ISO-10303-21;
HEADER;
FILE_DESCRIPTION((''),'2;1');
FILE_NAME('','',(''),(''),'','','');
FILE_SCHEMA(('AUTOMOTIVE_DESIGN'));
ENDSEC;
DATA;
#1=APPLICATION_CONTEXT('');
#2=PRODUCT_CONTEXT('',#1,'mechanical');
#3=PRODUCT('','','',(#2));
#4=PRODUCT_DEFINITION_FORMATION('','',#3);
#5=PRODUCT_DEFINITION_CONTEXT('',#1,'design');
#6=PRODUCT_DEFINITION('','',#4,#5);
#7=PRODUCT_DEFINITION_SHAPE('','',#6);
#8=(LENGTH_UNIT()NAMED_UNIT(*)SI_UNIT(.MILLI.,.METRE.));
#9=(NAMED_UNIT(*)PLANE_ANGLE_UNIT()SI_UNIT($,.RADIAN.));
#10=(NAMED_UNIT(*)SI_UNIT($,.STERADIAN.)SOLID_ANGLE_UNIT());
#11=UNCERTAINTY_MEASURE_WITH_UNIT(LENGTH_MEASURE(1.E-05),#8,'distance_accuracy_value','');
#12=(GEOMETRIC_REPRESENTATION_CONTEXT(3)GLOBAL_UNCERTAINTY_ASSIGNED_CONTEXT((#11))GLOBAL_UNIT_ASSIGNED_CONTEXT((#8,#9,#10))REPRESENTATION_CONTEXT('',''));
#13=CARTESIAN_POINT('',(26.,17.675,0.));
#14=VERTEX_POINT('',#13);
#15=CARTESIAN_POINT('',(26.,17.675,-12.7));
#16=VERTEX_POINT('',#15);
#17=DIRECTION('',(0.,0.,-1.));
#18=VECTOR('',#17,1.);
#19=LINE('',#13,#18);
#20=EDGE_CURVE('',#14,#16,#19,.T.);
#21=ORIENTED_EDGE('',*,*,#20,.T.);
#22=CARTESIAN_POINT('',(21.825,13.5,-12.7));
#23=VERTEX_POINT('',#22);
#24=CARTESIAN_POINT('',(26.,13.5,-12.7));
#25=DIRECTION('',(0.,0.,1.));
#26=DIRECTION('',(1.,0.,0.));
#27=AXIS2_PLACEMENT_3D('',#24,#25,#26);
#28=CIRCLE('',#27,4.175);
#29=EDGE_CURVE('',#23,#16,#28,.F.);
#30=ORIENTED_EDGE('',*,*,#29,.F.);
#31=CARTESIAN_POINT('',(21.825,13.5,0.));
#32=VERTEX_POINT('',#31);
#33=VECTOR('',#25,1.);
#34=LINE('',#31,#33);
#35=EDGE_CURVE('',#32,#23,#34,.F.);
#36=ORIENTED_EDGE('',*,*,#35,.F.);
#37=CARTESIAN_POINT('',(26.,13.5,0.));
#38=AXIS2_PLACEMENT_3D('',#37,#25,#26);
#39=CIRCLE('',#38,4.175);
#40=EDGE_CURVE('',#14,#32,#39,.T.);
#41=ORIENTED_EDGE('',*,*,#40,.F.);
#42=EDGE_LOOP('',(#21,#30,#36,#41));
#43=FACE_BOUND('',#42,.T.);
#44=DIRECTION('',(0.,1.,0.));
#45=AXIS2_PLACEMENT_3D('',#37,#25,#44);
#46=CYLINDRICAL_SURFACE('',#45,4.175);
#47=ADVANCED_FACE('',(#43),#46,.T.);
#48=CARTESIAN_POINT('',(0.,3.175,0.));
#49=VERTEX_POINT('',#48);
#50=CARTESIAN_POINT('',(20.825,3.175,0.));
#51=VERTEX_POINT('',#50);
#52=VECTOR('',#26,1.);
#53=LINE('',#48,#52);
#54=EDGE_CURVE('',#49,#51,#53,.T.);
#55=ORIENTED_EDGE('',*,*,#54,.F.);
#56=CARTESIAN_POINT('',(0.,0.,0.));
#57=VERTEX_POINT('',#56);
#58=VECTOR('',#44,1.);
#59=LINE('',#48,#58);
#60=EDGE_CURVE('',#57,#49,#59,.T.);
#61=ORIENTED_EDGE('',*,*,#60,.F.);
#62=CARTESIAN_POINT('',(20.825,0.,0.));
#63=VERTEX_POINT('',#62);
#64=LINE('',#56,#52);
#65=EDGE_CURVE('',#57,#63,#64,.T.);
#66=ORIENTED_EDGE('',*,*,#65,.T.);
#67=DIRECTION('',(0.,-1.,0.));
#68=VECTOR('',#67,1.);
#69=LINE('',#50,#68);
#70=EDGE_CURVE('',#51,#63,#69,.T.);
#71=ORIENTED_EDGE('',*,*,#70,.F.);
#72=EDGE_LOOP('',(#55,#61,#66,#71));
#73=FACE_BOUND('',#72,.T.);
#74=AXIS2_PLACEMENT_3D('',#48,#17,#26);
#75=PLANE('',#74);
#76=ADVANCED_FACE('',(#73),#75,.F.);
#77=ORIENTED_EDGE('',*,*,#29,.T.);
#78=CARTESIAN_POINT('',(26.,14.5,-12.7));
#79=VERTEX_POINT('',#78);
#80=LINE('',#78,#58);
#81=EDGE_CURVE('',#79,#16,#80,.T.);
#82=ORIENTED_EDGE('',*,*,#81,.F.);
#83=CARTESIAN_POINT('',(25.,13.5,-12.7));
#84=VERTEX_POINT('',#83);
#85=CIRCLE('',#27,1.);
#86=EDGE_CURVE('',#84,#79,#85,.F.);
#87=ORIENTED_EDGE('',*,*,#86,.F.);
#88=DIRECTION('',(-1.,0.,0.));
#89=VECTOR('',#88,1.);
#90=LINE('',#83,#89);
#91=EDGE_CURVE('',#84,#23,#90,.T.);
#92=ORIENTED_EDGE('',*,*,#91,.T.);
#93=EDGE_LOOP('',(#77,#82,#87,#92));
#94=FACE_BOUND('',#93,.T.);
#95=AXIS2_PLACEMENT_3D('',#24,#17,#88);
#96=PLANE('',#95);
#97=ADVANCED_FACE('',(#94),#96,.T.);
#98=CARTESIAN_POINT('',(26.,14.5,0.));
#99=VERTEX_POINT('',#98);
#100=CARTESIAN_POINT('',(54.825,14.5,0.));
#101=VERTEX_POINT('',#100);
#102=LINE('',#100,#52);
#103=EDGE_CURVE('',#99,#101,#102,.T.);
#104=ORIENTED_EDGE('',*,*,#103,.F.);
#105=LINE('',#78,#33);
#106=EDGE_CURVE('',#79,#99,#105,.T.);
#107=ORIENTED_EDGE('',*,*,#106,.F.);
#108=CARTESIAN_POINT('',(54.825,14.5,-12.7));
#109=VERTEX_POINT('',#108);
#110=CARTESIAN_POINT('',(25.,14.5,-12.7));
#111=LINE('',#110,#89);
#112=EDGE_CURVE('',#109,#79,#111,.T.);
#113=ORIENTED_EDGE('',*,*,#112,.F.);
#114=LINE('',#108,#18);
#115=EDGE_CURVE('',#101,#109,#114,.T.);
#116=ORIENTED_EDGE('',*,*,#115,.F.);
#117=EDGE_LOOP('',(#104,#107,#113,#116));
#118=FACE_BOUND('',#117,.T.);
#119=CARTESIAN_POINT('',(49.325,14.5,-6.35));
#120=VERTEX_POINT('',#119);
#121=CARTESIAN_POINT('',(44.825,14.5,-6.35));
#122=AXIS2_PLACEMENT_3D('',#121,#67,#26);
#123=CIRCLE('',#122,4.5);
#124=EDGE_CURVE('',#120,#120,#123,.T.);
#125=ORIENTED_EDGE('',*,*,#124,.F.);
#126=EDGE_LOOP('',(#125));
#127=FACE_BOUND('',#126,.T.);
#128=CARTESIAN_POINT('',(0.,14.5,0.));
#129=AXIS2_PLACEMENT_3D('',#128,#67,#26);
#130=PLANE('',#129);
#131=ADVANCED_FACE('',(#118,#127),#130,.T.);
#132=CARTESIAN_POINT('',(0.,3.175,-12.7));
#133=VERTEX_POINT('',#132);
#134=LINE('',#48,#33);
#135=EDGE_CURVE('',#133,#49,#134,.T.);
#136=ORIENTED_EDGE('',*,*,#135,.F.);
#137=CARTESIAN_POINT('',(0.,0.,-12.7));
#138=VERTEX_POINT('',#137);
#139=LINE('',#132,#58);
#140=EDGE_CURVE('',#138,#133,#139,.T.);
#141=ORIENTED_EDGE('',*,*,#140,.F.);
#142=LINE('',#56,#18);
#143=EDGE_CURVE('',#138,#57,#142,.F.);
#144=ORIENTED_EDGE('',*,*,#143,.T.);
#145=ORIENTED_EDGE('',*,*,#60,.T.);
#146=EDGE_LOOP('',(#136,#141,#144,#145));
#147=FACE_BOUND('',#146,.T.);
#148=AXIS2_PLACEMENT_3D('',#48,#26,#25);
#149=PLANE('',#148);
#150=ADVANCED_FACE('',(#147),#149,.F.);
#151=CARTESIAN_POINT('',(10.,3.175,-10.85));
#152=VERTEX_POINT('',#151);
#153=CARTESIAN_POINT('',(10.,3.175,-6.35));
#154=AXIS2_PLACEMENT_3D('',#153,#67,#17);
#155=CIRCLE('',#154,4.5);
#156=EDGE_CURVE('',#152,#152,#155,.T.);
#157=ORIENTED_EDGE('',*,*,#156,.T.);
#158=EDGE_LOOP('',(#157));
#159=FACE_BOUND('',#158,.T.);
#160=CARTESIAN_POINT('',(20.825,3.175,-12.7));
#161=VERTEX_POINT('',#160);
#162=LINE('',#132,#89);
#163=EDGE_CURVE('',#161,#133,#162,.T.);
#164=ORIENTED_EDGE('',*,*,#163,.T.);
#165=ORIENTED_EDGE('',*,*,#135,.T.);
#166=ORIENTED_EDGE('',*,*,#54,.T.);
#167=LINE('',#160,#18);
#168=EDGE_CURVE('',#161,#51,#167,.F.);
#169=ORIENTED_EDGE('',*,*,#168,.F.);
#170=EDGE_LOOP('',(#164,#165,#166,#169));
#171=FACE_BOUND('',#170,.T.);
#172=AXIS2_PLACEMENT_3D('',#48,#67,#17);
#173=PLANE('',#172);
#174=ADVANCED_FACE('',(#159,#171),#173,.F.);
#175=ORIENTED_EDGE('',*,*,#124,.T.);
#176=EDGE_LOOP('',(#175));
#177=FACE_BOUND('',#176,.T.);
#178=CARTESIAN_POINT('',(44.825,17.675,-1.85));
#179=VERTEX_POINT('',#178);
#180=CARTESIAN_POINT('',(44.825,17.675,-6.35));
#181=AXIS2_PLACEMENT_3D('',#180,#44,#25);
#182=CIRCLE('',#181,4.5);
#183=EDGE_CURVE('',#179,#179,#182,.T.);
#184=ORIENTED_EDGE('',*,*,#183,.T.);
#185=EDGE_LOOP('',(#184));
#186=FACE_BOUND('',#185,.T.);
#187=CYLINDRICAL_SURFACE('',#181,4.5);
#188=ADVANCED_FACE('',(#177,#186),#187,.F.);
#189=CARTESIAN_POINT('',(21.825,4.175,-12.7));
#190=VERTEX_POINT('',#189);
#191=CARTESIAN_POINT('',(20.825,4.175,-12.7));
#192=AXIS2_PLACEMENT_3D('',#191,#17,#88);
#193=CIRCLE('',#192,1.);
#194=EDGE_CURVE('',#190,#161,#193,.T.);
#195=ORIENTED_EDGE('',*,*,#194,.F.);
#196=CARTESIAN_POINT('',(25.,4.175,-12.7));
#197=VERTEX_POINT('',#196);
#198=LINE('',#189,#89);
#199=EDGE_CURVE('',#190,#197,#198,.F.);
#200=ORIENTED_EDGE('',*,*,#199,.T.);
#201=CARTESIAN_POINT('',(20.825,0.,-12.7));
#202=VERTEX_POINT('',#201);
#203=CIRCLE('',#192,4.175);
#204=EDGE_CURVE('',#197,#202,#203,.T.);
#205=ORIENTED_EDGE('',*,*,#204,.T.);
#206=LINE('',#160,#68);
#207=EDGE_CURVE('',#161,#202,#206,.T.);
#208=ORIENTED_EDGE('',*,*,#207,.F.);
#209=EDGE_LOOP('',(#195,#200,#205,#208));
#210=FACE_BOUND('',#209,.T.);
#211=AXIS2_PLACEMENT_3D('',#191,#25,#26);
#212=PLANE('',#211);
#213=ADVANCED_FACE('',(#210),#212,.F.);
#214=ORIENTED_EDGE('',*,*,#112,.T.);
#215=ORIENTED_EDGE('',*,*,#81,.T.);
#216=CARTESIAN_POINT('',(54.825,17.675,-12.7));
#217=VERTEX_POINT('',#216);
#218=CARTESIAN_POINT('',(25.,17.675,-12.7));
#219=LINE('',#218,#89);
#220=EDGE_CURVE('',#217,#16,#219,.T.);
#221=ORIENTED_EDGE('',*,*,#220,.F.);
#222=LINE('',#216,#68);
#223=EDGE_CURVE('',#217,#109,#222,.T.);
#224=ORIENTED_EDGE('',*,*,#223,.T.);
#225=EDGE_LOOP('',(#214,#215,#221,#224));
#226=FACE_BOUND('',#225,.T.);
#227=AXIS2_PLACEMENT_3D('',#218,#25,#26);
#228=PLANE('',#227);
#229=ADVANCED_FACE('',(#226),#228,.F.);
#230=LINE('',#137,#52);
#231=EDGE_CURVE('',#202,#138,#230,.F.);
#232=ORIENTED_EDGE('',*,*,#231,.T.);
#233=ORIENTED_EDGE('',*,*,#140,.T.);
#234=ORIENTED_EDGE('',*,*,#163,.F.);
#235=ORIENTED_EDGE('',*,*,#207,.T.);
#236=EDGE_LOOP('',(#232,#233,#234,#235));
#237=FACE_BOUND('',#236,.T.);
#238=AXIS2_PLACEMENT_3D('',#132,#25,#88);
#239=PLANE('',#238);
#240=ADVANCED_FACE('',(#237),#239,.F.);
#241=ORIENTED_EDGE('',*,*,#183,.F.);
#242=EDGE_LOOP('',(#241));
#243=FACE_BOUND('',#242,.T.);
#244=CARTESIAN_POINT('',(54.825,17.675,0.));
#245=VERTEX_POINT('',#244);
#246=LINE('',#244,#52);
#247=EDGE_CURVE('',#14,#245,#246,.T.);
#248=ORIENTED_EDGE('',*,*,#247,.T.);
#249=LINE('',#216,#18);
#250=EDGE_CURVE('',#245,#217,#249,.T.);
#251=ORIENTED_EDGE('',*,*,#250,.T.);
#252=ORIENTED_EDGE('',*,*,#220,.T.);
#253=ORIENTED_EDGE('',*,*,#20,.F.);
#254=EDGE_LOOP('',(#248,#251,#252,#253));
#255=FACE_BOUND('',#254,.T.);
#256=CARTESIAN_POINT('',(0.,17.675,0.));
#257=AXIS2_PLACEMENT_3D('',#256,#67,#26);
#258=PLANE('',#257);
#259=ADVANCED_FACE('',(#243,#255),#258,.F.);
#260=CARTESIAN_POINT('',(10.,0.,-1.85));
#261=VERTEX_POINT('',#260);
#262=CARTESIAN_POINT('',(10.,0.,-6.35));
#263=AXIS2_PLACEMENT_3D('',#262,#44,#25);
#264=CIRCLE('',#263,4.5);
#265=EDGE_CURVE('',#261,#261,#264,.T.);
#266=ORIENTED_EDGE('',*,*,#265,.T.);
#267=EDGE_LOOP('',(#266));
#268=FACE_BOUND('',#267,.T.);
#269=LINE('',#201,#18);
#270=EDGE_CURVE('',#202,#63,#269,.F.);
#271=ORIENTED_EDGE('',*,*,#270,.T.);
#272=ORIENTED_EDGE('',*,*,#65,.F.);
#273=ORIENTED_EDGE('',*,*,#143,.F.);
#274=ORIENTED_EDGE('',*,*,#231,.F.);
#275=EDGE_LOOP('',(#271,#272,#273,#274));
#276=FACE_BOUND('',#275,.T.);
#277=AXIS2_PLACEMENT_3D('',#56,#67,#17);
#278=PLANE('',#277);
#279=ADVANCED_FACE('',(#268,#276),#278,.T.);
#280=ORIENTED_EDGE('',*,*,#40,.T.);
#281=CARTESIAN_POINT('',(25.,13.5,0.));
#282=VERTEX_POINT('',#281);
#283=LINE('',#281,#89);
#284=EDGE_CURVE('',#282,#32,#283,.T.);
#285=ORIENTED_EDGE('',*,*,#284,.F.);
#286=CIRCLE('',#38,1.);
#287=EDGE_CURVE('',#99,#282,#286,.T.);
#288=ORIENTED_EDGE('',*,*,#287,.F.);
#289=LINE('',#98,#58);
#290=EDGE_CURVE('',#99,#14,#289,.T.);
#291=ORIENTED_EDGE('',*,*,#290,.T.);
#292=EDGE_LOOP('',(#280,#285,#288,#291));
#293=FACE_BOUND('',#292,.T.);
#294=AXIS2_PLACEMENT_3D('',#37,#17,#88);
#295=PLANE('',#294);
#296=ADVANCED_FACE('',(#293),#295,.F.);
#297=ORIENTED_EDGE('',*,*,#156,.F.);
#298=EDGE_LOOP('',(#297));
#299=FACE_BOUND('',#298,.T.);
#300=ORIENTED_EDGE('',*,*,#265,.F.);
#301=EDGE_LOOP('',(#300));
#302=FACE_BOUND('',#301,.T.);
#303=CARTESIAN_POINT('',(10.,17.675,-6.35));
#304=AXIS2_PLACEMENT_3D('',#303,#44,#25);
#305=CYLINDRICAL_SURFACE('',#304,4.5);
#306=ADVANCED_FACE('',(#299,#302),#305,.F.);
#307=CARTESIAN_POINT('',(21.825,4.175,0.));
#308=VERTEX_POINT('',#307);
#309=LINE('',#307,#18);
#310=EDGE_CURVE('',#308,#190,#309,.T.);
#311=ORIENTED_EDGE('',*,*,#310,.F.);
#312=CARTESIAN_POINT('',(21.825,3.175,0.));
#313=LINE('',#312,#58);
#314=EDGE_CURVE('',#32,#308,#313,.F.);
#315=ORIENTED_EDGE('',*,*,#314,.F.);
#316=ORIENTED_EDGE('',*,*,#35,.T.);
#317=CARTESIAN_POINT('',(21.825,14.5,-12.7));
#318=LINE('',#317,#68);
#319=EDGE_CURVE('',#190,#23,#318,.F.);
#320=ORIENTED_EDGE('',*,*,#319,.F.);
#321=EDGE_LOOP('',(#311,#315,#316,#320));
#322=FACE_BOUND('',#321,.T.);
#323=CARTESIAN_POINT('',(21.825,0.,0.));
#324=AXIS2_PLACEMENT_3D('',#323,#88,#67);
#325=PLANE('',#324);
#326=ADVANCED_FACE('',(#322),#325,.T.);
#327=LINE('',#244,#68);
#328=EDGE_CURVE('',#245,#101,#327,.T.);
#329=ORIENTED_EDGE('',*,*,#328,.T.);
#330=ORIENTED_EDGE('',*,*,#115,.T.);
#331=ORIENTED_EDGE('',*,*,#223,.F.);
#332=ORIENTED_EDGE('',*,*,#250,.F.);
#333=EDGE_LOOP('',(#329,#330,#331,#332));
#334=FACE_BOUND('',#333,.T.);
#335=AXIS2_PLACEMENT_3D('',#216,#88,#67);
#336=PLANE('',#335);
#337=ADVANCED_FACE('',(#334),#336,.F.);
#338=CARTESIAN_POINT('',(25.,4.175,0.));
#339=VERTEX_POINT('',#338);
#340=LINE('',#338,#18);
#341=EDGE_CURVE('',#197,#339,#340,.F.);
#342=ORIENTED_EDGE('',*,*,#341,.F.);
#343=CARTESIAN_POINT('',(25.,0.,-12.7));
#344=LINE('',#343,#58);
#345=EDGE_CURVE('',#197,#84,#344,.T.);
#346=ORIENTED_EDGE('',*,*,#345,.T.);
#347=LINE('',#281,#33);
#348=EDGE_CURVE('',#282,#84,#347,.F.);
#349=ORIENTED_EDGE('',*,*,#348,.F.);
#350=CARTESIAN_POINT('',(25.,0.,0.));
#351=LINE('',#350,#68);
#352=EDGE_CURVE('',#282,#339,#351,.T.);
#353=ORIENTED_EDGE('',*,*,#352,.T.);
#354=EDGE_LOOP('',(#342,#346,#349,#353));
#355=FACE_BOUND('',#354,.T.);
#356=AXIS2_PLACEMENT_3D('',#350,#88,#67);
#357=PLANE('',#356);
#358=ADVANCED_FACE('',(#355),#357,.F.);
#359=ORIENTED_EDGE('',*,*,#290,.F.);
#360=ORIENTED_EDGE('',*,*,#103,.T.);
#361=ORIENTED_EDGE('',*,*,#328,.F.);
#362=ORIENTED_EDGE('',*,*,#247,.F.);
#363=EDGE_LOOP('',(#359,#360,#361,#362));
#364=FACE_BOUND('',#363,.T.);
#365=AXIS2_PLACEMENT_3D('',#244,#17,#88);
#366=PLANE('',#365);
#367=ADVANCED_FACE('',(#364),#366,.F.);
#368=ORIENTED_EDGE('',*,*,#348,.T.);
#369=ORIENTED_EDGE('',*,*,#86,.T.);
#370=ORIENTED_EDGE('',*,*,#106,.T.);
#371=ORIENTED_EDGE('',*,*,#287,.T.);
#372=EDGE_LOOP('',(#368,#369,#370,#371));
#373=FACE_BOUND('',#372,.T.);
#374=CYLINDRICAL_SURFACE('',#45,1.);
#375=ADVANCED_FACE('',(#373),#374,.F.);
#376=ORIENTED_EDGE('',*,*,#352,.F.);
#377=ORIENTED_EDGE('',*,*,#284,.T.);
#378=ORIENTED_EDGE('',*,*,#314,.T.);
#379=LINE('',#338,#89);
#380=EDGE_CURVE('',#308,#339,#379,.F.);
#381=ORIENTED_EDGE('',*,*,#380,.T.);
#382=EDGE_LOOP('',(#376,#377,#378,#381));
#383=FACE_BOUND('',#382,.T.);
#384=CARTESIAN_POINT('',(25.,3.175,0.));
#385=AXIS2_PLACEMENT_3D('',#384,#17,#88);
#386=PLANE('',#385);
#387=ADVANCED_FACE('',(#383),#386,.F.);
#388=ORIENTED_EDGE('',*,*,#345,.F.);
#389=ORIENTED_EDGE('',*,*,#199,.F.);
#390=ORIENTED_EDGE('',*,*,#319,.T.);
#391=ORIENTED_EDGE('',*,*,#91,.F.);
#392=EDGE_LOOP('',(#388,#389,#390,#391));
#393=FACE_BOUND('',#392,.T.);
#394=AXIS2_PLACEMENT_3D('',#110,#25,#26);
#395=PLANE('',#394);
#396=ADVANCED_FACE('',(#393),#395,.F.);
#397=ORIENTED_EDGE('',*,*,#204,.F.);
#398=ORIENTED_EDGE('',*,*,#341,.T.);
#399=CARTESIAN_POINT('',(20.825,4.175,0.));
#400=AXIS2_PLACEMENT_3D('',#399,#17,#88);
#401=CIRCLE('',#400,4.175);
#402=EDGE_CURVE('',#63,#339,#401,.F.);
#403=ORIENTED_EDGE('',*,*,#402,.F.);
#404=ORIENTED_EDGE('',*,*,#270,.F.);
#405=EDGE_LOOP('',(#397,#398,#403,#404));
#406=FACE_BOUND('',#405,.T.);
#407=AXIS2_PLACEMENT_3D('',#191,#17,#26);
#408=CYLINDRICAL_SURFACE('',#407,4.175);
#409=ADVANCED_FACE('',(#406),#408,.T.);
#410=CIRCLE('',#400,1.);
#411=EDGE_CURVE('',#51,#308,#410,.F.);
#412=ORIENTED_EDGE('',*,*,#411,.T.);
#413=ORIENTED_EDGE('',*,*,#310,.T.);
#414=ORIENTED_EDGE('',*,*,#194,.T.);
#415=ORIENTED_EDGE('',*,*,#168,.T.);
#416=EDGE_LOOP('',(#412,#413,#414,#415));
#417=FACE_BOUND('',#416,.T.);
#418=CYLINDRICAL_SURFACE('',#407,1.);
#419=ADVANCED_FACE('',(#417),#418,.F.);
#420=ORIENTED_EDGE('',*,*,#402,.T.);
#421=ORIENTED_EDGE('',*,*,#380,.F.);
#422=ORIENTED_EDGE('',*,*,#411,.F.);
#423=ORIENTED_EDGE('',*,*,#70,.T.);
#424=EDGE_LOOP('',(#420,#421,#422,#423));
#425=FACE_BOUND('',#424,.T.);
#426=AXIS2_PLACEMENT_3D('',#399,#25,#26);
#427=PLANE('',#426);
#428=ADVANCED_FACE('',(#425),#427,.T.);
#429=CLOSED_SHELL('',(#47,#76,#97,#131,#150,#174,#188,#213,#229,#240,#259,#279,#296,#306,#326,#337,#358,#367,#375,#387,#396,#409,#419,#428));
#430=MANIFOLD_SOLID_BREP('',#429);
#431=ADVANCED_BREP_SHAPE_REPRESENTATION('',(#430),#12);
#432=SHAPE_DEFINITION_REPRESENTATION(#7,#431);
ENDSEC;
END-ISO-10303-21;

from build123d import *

# Parameters (mm, degrees)
SKETCH1_W                    = 25
SKETCH1_H                    = 12.7
BOSS_EXTRUDE1_DEPTH          = 3.175
EDGE_FLANGE1_STRIP_W         = 14.7
EDGE_FLANGE1_STRIP_H         = 3.175
EDGE_FLANGE1_STRIP_CUT_DEPTH = 12.7
EDGE_FLANGE1_DEPTH           = 12.7
EDGE_FLANGE2_STRIP_W         = 14.7
EDGE_FLANGE2_STRIP_H         = 3.175
EDGE_FLANGE2_STRIP_CUT_DEPTH = 12.7
EDGE_FLANGE2_DEPTH           = 12.7
M8_CLEARANCE_HOLE1_D         = 9


# Sheet-metal steps are written as plain solids
with BuildPart() as part:
    # Sketch1 → Boss-Extrude1 (new body)
    with BuildSketch(Plane(origin=(0, 0, 0), x_dir=(1, 0, 0), z_dir=(0, 1, 0))):
        with Locations((12.5, 6.35)):
            Rectangle(SKETCH1_W, SKETCH1_H)
    extrude(amount=BOSS_EXTRUDE1_DEPTH)

    # Edge-Flange1 strip (across the edge) → Edge-Flange1 strip cut (cut)
    with BuildSketch(Plane(origin=(25, 3.175, 0), x_dir=(-1, 0, 0), z_dir=(0, 0, -1))):
        with Locations((-3.175, -1.5875)):
            Rectangle(EDGE_FLANGE1_STRIP_W, EDGE_FLANGE1_STRIP_H)
    extrude(amount=EDGE_FLANGE1_STRIP_CUT_DEPTH, mode=Mode.SUBTRACT)

    # Edge-Flange1 section (across the edge) → Edge-Flange1 (add)
    with BuildSketch(Plane(origin=(25, 3.175, 0), x_dir=(-1, 0, 0), z_dir=(0, 0, -1))):
        with BuildLine():
            Line((0, 1), (0, 11.325))
            Line((0, 11.325), (3.175, 11.325))
            Line((3.175, 11.325), (3.175, 1))
            ThreePointArc((3.175, 1), (3.467893219, 0.292893219), (4.175, 0))
            Line((4.175, 0), (4.175, -3.175))
            ThreePointArc((4.175, -3.175), (1.222829189, -1.952170811), (0, 1))
        make_face()
    extrude(amount=EDGE_FLANGE1_DEPTH)

    # Edge-Flange2 strip (across the edge) → Edge-Flange2 strip cut (cut)
    with BuildSketch(Plane(origin=(25, 14.5, -12.7), x_dir=(0, -1, 0), z_dir=(0, 0, 1))):
        with Locations((-6.35, -1.5875)):
            Rectangle(EDGE_FLANGE2_STRIP_W, EDGE_FLANGE2_STRIP_H)
    extrude(amount=EDGE_FLANGE2_STRIP_CUT_DEPTH, mode=Mode.SUBTRACT)

    # Edge-Flange2 section (across the edge) → Edge-Flange2 (add)
    with BuildSketch(Plane(origin=(25, 14.5, -12.7), x_dir=(0, -1, 0), z_dir=(0, 0, 1))):
        with BuildLine():
            Line((-3.175, 1), (-3.175, 29.825))
            Line((-3.175, 29.825), (0, 29.825))
            Line((0, 29.825), (0, 1))
            ThreePointArc((0, 1), (0.292893219, 0.292893219), (1, 0))
            Line((1, 0), (1, -3.175))
            ThreePointArc((1, -3.175), (-1.952170811, -1.952170811), (-3.175, 1))
        make_face()
    extrude(amount=EDGE_FLANGE2_DEPTH)

    # M8 Clearance Hole1 (through all)
    with Locations(Plane(origin=(0, 17.675, 0), x_dir=(1, 0, 0), z_dir=(0, 1, 0))):
        with Locations((44.825, 6.35), (10, 6.35)):
            Hole(M8_CLEARANCE_HOLE1_D / 2)


solid = part.part
